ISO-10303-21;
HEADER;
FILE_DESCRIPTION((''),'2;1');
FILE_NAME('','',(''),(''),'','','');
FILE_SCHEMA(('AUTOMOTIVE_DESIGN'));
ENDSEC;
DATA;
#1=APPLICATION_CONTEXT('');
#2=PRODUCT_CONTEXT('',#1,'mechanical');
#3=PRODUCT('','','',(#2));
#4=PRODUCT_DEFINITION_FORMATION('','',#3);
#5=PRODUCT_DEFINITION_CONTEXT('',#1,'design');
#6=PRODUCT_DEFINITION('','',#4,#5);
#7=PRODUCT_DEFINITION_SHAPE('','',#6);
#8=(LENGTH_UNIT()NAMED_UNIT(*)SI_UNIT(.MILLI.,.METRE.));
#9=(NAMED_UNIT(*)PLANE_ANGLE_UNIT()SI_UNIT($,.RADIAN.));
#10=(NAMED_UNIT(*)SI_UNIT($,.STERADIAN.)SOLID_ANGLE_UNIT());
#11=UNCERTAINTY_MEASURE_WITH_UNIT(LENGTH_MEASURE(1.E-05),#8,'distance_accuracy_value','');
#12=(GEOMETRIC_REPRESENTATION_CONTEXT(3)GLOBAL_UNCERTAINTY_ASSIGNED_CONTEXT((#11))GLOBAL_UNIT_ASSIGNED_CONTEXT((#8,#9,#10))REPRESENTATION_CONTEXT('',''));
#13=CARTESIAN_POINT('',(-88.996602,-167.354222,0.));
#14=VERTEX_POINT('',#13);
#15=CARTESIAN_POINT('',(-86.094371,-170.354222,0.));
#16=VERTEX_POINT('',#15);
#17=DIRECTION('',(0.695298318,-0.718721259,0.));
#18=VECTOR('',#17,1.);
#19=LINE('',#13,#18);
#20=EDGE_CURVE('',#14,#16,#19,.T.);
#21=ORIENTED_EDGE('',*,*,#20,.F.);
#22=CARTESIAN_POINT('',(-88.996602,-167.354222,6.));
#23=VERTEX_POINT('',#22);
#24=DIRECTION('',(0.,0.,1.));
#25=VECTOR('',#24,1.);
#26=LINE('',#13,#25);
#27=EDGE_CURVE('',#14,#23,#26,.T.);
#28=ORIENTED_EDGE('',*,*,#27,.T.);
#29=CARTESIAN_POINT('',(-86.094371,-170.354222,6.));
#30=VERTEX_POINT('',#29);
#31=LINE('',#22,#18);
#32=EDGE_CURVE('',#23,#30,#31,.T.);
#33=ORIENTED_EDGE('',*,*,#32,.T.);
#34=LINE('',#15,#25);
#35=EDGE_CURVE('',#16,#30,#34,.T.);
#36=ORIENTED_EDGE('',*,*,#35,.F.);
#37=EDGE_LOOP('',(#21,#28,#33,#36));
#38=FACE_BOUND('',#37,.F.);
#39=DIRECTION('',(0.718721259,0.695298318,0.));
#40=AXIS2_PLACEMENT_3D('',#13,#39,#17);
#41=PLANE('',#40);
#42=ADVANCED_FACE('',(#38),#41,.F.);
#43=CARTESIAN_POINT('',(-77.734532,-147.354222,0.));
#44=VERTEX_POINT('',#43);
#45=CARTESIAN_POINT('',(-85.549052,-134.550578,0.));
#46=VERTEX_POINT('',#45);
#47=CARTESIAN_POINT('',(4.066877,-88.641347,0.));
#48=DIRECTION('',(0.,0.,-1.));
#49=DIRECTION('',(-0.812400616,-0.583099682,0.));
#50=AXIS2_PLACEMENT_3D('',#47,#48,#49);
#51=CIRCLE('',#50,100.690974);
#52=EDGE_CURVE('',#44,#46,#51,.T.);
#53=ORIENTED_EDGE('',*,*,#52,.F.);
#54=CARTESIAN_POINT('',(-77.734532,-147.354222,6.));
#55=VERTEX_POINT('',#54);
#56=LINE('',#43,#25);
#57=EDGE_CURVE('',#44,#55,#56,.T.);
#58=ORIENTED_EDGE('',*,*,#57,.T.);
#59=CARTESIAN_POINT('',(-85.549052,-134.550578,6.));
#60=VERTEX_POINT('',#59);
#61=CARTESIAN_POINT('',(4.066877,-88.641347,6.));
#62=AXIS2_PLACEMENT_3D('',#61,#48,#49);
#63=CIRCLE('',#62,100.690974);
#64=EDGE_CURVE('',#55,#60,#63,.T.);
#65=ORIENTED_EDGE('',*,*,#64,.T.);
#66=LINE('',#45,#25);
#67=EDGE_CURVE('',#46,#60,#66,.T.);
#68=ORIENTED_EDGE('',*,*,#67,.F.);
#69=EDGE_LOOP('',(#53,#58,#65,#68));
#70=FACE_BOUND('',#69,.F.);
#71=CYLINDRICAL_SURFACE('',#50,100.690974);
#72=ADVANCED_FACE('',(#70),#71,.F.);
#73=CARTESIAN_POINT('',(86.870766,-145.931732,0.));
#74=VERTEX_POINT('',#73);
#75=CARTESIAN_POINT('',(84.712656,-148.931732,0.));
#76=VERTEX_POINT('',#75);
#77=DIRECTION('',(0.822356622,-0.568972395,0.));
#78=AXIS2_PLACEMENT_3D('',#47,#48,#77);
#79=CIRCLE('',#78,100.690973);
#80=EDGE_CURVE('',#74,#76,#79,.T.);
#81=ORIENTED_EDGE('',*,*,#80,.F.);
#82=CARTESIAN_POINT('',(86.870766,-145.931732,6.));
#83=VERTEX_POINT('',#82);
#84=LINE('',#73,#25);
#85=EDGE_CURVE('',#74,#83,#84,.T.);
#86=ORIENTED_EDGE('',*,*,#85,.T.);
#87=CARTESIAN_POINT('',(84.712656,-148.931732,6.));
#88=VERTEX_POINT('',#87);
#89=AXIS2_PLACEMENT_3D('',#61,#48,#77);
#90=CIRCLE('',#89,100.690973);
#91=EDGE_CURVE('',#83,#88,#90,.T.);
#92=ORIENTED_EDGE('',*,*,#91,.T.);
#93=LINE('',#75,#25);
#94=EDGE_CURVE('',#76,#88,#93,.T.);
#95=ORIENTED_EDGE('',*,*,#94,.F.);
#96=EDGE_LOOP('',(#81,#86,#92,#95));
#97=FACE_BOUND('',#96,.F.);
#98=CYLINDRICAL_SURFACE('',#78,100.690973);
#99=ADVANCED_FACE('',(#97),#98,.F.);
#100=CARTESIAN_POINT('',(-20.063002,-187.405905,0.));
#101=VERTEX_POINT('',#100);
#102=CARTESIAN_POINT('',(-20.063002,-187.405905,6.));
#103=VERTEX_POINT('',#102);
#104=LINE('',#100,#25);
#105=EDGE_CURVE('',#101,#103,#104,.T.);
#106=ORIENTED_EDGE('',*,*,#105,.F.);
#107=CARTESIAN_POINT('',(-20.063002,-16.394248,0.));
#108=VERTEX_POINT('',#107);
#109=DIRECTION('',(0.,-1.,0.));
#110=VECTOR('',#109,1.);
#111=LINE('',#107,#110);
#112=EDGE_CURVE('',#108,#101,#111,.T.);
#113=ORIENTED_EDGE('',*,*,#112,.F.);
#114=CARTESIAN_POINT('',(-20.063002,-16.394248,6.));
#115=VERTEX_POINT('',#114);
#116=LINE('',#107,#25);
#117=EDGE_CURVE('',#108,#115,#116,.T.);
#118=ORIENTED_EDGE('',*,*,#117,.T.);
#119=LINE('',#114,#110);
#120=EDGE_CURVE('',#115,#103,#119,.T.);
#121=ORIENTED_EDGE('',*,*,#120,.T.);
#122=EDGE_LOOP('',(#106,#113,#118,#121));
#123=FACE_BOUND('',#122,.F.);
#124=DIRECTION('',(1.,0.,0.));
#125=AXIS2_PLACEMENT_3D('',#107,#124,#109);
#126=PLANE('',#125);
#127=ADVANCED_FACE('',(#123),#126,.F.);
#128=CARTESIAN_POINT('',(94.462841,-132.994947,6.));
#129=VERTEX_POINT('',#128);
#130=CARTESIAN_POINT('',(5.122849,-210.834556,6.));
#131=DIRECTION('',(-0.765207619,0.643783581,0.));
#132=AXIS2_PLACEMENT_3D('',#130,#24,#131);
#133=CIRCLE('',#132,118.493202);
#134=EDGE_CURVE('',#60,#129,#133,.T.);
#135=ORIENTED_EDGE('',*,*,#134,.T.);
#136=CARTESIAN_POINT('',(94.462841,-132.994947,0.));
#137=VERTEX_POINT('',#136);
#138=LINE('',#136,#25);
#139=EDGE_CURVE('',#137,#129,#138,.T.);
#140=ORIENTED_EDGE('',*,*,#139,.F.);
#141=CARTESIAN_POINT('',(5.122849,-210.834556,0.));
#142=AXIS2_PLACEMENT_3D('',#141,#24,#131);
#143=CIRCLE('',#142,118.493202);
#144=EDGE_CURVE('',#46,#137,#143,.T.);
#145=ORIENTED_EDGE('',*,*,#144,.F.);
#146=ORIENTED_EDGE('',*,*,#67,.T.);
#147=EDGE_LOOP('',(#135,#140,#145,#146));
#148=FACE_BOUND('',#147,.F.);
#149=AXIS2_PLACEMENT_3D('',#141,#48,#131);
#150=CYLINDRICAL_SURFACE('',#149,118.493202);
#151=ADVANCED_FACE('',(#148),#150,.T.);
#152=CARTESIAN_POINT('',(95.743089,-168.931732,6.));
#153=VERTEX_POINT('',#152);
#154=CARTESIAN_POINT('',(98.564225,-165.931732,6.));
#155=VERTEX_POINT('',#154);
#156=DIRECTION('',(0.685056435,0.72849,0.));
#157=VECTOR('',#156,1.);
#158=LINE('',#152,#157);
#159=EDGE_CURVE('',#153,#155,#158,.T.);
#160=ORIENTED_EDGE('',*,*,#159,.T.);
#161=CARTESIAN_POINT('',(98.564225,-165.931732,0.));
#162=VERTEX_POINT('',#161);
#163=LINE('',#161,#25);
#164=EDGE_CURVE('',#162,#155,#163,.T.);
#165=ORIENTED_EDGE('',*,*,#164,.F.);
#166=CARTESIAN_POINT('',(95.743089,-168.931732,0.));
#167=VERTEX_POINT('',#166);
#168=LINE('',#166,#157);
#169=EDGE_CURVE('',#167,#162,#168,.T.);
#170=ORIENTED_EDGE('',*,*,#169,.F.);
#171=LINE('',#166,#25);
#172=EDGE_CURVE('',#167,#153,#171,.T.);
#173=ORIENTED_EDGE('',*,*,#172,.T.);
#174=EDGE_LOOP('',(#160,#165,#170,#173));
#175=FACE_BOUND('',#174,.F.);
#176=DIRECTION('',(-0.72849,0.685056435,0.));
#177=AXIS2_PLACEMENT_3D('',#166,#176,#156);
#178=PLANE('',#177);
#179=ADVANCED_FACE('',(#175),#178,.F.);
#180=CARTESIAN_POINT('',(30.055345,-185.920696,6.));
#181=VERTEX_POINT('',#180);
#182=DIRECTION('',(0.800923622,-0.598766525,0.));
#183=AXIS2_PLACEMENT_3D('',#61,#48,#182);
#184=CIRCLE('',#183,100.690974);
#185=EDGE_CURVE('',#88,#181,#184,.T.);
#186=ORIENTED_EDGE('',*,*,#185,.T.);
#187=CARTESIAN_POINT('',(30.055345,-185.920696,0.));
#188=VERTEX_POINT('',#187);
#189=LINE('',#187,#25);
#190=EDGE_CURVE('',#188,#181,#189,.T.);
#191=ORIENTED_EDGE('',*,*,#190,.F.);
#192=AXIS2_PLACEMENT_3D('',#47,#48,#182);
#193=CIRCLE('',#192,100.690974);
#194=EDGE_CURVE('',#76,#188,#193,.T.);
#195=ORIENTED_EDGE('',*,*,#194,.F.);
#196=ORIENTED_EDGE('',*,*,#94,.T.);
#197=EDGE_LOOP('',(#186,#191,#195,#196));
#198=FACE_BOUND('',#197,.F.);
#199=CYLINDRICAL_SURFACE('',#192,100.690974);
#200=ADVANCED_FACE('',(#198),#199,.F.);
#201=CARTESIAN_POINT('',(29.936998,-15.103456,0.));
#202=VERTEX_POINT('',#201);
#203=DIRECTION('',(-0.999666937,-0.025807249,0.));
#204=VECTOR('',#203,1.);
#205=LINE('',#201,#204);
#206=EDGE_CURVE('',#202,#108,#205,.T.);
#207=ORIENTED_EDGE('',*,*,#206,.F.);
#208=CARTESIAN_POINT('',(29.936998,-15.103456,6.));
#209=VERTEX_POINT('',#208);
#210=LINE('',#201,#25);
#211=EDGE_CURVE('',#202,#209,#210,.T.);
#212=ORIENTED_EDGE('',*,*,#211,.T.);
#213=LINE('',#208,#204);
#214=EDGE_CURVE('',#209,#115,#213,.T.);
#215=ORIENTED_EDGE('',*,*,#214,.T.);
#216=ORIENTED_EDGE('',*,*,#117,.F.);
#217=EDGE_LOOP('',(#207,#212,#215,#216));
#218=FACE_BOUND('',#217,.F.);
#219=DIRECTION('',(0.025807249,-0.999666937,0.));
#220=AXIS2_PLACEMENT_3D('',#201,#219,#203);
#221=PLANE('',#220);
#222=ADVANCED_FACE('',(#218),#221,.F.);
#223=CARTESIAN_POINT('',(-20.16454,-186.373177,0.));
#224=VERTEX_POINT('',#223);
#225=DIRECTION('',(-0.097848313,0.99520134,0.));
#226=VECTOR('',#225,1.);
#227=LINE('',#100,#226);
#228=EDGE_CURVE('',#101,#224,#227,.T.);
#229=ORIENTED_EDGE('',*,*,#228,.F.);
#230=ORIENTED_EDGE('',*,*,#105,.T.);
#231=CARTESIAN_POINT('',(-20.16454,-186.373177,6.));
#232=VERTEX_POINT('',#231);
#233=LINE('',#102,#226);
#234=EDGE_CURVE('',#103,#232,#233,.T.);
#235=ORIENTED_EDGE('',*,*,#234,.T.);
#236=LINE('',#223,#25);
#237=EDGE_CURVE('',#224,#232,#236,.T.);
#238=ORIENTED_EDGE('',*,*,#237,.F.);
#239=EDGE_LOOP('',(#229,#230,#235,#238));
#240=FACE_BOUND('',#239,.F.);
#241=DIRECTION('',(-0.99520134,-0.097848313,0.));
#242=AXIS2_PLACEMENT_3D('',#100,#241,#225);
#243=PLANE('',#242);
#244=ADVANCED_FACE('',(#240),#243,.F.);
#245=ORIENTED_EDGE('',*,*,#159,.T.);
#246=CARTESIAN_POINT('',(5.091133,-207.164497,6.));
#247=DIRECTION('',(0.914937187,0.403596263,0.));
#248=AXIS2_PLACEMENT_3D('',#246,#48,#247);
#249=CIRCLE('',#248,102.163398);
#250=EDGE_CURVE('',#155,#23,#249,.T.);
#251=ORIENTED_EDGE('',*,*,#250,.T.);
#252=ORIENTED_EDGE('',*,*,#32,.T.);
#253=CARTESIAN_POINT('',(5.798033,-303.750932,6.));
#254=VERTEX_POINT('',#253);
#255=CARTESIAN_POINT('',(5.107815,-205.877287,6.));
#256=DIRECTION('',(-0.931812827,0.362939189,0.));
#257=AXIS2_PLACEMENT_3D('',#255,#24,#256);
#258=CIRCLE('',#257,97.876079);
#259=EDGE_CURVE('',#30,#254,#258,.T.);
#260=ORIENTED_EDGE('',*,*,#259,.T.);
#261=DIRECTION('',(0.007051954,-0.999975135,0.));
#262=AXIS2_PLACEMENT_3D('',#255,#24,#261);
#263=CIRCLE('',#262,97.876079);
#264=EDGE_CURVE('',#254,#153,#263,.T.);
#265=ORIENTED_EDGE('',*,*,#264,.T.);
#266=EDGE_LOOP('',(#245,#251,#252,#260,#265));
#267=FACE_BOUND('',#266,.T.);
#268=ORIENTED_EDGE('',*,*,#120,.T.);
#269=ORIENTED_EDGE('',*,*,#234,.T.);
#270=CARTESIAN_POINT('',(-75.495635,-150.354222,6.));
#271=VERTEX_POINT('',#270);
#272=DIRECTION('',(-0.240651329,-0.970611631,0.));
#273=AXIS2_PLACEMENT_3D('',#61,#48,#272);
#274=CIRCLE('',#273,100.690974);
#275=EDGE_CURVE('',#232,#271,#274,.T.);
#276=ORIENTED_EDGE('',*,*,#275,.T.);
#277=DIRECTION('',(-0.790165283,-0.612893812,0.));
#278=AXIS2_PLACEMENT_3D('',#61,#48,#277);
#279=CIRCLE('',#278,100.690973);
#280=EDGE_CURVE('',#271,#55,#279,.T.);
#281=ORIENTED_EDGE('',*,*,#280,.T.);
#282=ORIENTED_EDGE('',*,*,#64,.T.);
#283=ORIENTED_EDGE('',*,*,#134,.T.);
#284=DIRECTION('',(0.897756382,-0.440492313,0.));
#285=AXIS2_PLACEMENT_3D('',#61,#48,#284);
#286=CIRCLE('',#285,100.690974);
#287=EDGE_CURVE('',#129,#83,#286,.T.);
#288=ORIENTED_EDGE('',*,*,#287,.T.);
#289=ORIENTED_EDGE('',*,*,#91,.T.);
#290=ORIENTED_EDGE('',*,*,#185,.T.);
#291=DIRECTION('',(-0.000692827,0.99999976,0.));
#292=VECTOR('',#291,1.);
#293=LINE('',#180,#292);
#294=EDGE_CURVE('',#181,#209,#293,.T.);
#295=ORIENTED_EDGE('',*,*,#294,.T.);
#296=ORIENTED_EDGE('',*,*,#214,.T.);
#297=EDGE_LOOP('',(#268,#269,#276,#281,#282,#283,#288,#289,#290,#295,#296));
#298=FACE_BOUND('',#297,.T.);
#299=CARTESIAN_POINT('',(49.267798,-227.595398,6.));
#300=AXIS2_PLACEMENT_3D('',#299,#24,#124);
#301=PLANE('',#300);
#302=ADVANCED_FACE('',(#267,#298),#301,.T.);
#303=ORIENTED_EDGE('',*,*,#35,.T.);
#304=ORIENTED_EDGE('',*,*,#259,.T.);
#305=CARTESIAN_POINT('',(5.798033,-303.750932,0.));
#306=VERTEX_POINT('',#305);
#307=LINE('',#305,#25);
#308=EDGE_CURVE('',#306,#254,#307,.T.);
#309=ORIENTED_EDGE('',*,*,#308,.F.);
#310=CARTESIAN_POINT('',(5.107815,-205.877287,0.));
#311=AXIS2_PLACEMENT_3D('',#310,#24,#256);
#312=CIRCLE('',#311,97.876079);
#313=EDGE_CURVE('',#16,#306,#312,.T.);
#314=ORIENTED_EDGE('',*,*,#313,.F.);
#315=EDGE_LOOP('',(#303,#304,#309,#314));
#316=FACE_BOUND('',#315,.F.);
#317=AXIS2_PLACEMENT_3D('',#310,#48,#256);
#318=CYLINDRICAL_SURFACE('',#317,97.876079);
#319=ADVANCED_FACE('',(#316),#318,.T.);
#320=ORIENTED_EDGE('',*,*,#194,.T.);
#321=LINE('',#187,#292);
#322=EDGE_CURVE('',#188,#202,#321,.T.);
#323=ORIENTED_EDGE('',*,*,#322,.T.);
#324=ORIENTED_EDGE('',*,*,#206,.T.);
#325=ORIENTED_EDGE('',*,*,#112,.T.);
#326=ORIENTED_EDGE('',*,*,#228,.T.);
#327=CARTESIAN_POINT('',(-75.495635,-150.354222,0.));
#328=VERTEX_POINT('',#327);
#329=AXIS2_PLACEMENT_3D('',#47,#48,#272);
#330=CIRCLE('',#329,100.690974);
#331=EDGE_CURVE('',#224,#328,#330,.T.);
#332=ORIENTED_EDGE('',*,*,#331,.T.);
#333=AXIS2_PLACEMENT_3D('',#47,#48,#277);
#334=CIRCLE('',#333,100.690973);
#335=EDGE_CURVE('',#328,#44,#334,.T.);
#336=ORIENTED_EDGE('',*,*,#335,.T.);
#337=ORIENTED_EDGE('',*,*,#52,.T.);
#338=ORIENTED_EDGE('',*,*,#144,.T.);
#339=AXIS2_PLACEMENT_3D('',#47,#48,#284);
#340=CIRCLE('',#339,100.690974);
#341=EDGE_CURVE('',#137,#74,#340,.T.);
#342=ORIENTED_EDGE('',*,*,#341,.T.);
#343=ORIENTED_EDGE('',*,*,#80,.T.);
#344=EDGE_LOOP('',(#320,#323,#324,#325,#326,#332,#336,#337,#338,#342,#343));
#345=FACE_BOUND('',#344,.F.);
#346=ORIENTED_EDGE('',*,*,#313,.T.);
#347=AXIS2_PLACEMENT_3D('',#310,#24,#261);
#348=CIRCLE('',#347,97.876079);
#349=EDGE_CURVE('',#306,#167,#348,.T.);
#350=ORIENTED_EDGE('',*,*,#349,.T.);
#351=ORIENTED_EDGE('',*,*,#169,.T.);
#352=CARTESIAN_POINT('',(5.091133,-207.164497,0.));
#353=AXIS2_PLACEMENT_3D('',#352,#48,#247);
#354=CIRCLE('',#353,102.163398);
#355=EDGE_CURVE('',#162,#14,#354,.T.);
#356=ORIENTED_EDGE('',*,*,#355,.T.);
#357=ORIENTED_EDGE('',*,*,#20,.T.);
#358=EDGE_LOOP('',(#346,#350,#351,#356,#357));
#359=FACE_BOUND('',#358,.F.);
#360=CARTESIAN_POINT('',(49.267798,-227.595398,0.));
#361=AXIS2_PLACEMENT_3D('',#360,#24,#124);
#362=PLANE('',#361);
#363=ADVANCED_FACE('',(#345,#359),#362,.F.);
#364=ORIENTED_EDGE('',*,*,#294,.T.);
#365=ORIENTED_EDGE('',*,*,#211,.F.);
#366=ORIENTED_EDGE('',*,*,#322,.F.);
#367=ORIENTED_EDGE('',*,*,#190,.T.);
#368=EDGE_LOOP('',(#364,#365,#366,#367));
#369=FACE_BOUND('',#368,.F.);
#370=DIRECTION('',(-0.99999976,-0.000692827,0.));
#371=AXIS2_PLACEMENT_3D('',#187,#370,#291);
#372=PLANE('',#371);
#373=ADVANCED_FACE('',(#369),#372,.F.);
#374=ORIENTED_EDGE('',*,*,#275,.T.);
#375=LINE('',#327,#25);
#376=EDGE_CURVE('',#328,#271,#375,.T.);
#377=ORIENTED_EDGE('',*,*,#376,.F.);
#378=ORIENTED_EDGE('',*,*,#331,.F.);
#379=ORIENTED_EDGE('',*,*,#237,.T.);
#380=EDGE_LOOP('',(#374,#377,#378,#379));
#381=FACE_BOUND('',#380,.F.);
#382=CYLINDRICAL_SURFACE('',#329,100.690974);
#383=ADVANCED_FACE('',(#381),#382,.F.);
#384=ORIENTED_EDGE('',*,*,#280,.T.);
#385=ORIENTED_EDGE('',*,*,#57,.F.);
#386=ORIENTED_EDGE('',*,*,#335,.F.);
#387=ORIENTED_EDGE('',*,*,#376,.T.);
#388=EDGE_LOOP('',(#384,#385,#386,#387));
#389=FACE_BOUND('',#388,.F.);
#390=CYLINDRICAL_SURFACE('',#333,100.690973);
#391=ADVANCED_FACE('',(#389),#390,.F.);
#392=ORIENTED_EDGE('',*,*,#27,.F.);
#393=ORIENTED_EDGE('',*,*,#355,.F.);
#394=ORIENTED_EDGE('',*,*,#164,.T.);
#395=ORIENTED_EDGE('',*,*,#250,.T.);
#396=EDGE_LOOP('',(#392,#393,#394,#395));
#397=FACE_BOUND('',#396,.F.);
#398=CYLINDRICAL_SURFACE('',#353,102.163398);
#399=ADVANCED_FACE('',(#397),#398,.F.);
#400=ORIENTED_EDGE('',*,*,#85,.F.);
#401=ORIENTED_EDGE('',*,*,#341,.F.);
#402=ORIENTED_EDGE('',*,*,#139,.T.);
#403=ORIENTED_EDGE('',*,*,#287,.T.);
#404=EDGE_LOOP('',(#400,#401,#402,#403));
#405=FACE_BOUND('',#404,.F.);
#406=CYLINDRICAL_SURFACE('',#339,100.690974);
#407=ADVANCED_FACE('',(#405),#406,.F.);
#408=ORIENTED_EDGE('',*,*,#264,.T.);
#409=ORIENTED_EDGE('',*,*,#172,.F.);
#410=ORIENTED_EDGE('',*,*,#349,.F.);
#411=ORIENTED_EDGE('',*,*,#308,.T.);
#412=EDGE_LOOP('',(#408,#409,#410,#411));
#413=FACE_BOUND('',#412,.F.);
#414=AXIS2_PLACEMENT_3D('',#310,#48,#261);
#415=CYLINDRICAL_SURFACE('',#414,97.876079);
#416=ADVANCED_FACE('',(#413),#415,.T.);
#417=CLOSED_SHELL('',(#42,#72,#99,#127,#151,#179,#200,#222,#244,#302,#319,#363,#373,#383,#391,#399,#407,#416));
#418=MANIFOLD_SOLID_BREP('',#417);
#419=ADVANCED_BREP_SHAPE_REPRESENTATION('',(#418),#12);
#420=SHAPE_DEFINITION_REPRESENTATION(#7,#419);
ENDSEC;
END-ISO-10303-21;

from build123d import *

# Parameters (mm, degrees)
F1_DEPTH = 6


# Not quite as in the source:
# - a feature names something its author has since deleted; it is built from what else it names


with BuildPart() as f1:
    # F0 (on Top) → F1 (new body)
    with BuildSketch(Plane.XY):
        with BuildLine():
            ThreePointArc((30.0553449159, -185.920695897), (17.5794063582, -188.4215241051), (4.8876879096, -189.3289751767))
            Line((4.8876879096, -189.3289751767), (5.7980329658, -303.75093242))
            ThreePointArc((5.7980329658, -303.75093242), (86.5273496986, -260.1965866309), (95.7430891745, -168.9317316034))
            ThreePointArc((95.7430891745, -168.9317316034), (90.8132652561, -158.6088748661), (84.7126559945, -148.9317316034))
            ThreePointArc((84.7126559945, -148.9317316034), (60.5005683745, -172.0314581931), (30.0553449159, -185.920695897))
        make_face()
        with BuildLine():
            ThreePointArc((98.5642250933, -165.9317316034), (90.8814208815, -262.6386931182), (5.8423814985, -309.3251329781))
            ThreePointArc((5.8423814985, -309.3251329781), (-79.8609699448, -263.9139469341), (-88.9966016407, -167.3542218927))
            ThreePointArc((-88.9966016407, -167.3542218927), (-83.929020631, -157.0369391236), (-77.7345321086, -147.3542218927))
            ThreePointArc((-77.7345321086, -147.3542218927), (-81.8805443881, -141.0981193513), (-85.5490516624, -134.5505784994))
            ThreePointArc((-85.5490516624, -134.5505784994), (6.1468085688, -329.3233337338), (94.4628409087, -132.9949471034))
            ThreePointArc((94.4628409087, -132.9949471034), (90.9080384927, -139.6049105385), (86.8707656456, -145.9317316034))
            ThreePointArc((86.8707656456, -145.9317316034), (93.2862540801, -155.5991937575), (98.5642250933, -165.9317316034))
        make_face()
        with BuildLine():
            Line((5.7980329658, -303.75093242), (4.8876879096, -189.3289751767))
            ThreePointArc((4.8876879096, -189.3289751767), (-7.6794152519, -188.6448310467), (-20.0630018523, -186.3982963877))
            Line((-20.0630018523, -186.3982963877), (-20.0630018523, -187.4059048465))
            Line((-20.0630018523, -187.4059048465), (-20.1645397489, -186.3731772774))
            ThreePointArc((-20.1645397489, -186.3731772774), (-50.8661384709, -173.027578246), (-75.4956347969, -150.3542218927))
            ThreePointArc((-75.4956347969, -150.3542218927), (-81.3750972509, -160.0468085115), (-86.0943708707, -170.3542218927))
            ThreePointArc((-86.0943708707, -170.3542218927), (-75.4947572543, -261.4016255971), (5.7980329658, -303.75093242))
        make_face()
        with BuildLine():
            Line((-88.9966016407, -167.3542218927), (-86.0943708707, -170.3542218927))
            ThreePointArc((-86.0943708707, -170.3542218927), (-81.3750972509, -160.0468085115), (-75.4956347969, -150.3542218927))
            ThreePointArc((-75.4956347969, -150.3542218927), (-76.6290258855, -148.8646271178), (-77.7345321086, -147.3542218927))
            ThreePointArc((-77.7345321086, -147.3542218927), (-83.929020631, -157.0369391236), (-88.9966016407, -167.3542218927))
        make_face()
        with BuildLine():
            ThreePointArc((84.7126559945, -148.9317316034), (90.8132652561, -158.6088748661), (95.7430891745, -168.9317316034))
            Line((95.7430891745, -168.9317316034), (98.5642250933, -165.9317316034))
            ThreePointArc((98.5642250933, -165.9317316034), (93.2862540801, -155.5991937575), (86.8707656456, -145.9317316034))
            ThreePointArc((86.8707656456, -145.9317316034), (85.8054753664, -147.4416334036), (84.7126559945, -148.9317316034))
        make_face()
        with BuildLine():
            ThreePointArc((-20.0630018523, -186.3982963877), (-7.6794152519, -188.6448310467), (4.8876879096, -189.3289751767))
            ThreePointArc((4.8876879096, -189.3289751767), (17.5794063582, -188.4215241051), (30.0553449159, -185.920695897))
            Line((30.0553449159, -185.920695897), (29.9369981477, -15.103455868))
            Line((29.9369981477, -15.103455868), (-20.0630018523, -16.3942482322))
            Line((-20.0630018523, -16.3942482322), (-20.0630018523, -186.3982963877))
        make_face()
    extrude(amount=F1_DEPTH)


solid = f1.part
